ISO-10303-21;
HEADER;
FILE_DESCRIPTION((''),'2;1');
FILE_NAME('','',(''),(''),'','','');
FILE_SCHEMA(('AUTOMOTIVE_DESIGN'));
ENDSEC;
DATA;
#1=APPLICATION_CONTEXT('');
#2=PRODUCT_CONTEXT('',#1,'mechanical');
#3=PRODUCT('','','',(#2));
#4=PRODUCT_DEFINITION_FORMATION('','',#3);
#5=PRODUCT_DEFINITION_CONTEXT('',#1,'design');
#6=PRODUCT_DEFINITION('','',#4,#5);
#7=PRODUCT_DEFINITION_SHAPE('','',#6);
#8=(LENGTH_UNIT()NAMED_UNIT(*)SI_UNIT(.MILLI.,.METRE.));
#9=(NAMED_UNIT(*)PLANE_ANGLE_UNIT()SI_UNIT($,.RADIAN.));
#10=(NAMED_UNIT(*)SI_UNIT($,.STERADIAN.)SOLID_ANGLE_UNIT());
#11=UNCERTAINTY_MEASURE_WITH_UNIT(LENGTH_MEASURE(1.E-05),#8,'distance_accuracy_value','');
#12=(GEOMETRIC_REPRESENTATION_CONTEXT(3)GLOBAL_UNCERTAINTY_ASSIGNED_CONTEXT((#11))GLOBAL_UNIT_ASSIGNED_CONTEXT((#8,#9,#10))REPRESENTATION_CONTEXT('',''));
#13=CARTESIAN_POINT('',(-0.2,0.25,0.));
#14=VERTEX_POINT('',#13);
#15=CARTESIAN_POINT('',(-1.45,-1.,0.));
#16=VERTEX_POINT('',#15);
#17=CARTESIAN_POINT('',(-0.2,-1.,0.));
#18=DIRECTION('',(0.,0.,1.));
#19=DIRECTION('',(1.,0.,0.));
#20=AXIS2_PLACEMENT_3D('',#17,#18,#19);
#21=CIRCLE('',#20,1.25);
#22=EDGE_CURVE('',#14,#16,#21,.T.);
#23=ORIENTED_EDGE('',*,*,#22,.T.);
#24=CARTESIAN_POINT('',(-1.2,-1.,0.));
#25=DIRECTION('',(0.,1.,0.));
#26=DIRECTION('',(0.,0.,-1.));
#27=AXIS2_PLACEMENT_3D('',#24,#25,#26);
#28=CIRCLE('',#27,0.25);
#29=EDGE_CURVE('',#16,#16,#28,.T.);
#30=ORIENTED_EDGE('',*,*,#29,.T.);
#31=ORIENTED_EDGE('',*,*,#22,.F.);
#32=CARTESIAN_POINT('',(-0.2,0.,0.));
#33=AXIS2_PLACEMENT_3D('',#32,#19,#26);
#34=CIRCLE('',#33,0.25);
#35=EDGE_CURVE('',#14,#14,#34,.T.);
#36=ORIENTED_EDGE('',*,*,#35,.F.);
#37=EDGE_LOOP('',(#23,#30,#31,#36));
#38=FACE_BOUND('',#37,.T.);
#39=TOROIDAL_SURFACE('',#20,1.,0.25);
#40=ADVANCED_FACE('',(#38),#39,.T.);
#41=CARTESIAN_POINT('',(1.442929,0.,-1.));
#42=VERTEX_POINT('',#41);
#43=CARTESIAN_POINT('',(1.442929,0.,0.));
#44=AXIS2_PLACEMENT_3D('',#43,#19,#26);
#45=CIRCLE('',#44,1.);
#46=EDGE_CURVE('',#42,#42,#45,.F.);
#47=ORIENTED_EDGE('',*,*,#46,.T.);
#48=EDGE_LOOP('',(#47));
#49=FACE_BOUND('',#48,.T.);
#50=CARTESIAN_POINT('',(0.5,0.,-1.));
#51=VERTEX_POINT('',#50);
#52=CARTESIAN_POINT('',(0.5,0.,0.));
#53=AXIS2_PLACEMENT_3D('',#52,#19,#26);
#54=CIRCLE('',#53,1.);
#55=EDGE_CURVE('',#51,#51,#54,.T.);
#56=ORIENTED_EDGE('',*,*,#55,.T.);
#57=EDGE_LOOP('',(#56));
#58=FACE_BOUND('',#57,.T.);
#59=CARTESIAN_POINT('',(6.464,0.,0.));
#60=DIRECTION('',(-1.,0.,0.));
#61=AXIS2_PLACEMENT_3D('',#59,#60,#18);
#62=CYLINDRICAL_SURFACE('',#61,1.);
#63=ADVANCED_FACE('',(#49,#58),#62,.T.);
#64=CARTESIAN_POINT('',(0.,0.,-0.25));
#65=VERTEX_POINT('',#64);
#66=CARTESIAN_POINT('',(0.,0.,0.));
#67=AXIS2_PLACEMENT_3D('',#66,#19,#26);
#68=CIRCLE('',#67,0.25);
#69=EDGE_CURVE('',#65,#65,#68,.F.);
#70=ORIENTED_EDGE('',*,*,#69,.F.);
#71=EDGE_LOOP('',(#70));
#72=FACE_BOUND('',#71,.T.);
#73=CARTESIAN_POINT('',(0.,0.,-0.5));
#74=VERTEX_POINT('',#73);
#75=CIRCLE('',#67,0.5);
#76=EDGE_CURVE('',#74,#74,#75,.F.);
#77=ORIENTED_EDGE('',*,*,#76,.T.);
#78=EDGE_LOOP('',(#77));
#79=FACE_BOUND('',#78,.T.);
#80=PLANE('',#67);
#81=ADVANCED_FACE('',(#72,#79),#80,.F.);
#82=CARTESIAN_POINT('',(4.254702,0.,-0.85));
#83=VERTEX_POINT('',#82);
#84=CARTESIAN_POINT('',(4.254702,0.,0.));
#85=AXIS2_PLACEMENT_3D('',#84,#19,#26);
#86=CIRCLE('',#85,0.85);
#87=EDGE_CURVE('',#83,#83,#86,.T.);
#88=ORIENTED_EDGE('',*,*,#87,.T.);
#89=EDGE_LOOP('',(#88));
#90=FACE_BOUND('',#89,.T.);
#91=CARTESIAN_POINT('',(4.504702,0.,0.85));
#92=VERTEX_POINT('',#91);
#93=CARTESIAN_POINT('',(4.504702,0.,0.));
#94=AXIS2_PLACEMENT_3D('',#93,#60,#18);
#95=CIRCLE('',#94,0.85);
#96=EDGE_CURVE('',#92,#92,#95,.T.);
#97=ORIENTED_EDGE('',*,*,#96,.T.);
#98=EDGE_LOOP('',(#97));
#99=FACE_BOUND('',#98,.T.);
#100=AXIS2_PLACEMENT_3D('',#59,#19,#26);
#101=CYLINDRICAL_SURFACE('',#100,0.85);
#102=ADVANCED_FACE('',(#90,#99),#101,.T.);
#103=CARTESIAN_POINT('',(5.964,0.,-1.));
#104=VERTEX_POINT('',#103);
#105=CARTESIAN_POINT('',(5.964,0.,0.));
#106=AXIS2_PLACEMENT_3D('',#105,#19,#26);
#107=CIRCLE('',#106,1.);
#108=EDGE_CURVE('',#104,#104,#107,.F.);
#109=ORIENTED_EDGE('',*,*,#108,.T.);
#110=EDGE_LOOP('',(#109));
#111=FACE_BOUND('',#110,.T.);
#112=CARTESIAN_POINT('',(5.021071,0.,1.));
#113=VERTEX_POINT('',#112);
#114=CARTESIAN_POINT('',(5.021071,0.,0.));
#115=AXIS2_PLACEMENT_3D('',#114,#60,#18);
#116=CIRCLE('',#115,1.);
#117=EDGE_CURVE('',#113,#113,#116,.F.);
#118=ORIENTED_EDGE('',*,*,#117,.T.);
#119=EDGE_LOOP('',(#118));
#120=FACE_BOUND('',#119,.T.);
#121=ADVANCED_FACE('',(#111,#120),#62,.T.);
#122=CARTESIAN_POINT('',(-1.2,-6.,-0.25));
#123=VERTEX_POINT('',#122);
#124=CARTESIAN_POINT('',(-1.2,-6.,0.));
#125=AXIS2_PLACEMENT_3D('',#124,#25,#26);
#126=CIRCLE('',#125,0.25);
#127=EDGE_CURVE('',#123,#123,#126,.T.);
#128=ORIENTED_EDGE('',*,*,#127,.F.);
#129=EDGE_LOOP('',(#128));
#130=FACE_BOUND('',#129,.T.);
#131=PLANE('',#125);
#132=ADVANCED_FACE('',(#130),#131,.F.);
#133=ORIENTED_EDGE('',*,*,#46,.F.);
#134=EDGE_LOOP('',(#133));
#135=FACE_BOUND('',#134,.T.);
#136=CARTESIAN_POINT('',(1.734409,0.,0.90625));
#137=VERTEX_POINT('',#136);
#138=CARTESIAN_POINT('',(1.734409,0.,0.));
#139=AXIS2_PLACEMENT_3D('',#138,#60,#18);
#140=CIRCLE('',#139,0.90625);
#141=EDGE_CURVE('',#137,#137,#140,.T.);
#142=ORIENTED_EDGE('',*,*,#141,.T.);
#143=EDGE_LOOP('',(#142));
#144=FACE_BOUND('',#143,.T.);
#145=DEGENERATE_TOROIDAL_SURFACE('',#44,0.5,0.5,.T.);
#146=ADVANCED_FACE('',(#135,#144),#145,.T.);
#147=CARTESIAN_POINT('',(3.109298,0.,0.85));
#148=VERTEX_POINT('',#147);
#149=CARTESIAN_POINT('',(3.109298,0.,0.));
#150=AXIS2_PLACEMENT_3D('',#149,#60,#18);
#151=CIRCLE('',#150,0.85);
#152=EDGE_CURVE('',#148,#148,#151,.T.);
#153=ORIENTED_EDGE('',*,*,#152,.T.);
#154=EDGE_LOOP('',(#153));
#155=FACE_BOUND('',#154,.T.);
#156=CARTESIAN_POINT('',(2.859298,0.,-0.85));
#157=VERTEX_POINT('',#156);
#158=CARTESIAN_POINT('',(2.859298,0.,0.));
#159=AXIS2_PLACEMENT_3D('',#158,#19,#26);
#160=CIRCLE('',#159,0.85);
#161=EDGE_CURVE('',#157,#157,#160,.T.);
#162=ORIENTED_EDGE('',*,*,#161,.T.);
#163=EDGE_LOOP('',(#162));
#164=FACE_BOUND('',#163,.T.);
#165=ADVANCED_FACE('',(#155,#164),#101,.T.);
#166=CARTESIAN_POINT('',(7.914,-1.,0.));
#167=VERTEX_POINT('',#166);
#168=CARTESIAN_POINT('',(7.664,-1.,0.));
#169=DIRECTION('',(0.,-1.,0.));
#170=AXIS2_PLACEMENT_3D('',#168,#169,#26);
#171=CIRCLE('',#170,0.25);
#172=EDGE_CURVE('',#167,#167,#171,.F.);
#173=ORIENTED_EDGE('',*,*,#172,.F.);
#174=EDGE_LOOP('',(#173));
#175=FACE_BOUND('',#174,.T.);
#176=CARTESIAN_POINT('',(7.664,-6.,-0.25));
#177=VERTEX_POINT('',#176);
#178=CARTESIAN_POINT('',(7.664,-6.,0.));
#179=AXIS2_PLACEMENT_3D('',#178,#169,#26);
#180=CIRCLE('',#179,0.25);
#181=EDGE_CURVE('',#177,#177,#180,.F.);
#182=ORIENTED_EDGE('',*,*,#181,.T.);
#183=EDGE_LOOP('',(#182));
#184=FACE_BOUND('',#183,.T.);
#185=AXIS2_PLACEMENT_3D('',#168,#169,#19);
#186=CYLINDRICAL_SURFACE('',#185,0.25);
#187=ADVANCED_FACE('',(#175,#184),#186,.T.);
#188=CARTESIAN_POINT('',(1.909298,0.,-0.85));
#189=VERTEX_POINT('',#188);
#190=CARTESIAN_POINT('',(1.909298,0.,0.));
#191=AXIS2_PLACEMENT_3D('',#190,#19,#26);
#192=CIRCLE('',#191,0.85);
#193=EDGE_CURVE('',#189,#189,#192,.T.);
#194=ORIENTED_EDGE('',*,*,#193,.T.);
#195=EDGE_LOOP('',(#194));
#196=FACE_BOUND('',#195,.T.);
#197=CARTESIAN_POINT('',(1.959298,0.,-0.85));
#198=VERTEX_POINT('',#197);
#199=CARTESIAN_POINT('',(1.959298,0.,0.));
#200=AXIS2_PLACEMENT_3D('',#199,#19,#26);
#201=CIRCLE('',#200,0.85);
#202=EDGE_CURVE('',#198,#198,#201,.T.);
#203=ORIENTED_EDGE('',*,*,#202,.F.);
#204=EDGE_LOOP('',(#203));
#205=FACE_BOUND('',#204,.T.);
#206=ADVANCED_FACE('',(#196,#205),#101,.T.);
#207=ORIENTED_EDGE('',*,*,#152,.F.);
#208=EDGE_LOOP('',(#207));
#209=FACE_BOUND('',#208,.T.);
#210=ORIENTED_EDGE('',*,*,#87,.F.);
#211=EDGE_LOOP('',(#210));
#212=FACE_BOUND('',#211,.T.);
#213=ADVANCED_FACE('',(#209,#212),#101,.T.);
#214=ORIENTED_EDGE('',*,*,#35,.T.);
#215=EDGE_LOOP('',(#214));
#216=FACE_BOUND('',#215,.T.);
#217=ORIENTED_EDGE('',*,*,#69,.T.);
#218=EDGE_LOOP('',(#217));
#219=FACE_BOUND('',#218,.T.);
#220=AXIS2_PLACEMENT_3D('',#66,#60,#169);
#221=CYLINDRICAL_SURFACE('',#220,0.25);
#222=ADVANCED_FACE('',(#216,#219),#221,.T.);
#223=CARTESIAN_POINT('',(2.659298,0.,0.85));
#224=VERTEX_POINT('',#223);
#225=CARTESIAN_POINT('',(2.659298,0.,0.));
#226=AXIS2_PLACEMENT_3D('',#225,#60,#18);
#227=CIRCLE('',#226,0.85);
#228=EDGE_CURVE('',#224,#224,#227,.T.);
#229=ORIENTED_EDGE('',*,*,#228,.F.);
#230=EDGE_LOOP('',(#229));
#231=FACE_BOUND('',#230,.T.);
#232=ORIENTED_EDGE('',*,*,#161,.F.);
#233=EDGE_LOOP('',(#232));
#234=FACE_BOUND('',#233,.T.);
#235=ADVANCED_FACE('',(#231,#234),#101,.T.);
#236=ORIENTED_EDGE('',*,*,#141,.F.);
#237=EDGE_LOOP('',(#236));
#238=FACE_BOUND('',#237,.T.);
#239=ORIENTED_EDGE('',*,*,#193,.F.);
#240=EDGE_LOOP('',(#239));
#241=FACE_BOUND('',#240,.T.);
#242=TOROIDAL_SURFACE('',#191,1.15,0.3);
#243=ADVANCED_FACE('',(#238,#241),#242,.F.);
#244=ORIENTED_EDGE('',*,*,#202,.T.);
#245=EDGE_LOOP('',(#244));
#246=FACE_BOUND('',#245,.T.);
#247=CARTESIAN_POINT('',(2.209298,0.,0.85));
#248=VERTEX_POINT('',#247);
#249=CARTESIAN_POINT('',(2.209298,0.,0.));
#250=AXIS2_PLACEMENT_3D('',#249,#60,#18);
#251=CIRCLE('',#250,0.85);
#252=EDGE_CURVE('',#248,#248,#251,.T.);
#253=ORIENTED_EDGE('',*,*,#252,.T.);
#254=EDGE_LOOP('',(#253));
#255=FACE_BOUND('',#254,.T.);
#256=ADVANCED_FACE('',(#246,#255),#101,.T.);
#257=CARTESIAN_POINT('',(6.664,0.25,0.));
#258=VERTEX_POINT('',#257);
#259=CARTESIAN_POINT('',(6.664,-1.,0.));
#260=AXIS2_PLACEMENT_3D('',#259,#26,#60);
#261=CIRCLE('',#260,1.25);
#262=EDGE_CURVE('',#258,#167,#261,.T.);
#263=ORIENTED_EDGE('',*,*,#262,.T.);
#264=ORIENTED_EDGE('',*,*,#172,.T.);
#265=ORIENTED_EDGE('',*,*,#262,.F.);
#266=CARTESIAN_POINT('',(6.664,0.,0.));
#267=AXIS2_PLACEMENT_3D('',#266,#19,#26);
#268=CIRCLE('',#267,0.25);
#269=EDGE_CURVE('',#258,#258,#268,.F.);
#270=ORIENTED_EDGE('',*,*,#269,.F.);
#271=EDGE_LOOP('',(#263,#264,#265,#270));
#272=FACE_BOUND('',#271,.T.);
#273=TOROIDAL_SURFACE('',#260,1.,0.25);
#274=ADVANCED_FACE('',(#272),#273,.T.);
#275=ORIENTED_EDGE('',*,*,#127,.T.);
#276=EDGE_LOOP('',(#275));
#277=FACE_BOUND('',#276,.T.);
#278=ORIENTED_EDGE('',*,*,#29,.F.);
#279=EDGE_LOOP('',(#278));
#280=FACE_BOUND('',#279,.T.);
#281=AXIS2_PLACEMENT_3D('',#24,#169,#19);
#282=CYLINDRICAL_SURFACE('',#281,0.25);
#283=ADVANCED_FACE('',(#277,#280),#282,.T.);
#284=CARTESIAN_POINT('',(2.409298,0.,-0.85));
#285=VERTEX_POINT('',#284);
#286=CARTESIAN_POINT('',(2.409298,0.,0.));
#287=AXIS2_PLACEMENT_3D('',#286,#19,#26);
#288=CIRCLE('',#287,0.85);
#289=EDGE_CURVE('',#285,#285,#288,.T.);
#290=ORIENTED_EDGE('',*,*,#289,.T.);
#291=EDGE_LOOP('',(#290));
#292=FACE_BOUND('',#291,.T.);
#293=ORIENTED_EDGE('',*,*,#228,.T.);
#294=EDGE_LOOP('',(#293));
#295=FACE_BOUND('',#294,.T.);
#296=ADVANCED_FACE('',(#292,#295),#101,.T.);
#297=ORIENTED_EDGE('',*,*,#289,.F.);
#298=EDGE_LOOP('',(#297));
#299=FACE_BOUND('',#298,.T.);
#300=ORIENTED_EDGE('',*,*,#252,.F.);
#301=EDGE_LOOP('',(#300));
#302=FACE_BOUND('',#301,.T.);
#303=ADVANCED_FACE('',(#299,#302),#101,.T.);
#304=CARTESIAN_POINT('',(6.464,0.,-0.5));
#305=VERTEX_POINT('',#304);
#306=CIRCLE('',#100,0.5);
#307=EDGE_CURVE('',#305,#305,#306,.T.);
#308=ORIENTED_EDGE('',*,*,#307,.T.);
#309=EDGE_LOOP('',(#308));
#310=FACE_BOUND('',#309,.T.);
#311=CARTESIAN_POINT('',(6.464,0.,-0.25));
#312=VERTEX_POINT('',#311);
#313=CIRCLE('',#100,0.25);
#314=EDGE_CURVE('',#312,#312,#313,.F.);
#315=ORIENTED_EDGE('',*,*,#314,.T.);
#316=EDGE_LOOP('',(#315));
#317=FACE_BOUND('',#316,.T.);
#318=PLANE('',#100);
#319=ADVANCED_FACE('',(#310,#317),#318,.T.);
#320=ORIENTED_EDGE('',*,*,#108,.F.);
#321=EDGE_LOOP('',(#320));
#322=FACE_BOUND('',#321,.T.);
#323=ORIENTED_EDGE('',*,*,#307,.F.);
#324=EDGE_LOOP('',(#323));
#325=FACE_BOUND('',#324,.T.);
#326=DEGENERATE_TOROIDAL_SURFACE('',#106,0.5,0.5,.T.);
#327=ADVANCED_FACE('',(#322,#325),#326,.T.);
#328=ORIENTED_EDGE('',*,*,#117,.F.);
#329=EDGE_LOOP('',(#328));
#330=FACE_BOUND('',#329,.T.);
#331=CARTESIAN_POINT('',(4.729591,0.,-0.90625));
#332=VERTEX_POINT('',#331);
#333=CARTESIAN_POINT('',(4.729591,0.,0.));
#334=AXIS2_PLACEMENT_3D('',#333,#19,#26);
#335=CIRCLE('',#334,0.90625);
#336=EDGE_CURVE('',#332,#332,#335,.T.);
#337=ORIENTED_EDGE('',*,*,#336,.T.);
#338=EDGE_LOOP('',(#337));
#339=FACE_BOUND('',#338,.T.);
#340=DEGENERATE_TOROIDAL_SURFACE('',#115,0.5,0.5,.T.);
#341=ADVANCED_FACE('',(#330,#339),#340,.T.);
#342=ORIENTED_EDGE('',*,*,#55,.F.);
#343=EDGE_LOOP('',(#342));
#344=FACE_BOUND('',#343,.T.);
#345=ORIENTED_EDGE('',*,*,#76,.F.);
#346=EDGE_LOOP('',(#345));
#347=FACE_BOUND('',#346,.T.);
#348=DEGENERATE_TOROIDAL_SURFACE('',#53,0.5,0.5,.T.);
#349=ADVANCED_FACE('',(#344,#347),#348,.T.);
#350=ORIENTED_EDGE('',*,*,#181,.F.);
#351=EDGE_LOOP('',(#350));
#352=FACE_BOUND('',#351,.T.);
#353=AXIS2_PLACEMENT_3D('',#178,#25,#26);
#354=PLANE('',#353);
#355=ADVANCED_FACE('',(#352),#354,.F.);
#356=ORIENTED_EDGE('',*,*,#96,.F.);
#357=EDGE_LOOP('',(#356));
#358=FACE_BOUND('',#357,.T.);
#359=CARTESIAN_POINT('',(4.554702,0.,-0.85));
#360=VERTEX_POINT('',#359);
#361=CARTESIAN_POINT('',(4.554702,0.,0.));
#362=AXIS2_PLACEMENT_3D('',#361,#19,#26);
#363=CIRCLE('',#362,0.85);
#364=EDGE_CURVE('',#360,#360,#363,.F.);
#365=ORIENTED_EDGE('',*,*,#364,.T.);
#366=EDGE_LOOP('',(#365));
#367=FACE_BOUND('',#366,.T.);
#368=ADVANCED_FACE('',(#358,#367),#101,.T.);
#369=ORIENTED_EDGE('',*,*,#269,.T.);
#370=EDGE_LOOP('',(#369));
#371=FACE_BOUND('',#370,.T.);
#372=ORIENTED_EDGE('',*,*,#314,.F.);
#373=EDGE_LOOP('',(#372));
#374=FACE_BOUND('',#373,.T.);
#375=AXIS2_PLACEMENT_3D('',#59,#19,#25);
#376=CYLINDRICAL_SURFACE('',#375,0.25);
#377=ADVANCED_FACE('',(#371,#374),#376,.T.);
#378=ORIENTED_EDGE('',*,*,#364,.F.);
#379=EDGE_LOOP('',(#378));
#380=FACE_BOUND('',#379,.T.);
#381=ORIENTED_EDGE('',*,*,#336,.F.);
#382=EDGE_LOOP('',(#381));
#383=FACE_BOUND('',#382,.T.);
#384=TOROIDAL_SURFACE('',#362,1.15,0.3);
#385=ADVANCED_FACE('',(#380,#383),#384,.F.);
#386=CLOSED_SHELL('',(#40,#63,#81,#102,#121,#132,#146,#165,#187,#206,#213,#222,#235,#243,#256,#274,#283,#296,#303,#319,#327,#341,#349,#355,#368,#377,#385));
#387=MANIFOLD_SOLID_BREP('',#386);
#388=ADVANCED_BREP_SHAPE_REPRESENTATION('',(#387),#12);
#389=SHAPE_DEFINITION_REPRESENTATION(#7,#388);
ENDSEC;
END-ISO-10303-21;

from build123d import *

# Parameters (mm, degrees)
SKETCH58_R          = 1
BOSS_EXTRUDE1_DEPTH = 6.464
SKETCH59_W          = 2.864
SKETCH59_H          = 0.3
FILLET6_R           = 0.5
FILLET7_R           = 0.3
SKETCH54_R          = 0.25


with BuildPart() as part:
    # Sketch58 → Boss-Extrude1 (new body)
    with BuildSketch(Plane(origin=(0, 0, 0), x_dir=(0, 0, -1), z_dir=(1, 0, 0))):
        Circle(SKETCH58_R)
    extrude(amount=BOSS_EXTRUDE1_DEPTH)

    # Sketch59 → Cut-Revolve1 (revolve, cut)
    with BuildSketch(Plane.XY, mode=Mode.PRIVATE) as cut_revolve1_sk:
        with Locations((3.232, 1)):
            Rectangle(SKETCH59_W, SKETCH59_H)
    revolve(cut_revolve1_sk.sketch.rotate(Axis((6.464, 0, 0), (-1, 0, 0)), 90), axis=Axis((6.464, 0, 0), (-1, 0, 0)), mode=Mode.SUBTRACT)

    # Fillet6
    # the kernel refuses this fillet: 0.5 mm, written as the material it takes off along each edge
    with BuildSketch(Plane(origin=(0, 0, 0), x_dir=(0, 0, -1), z_dir=(0, -1, 0))) as fillet6_piece_1:
        with BuildLine():
            CenterArc((1 - FILLET6_R, FILLET6_R), FILLET6_R, 270, 90)
            Line((1 - FILLET6_R, 0), (1 - FILLET6_R, -FILLET6_R * 0.02))
            Line((1 - FILLET6_R, -FILLET6_R * 0.02), (1 + FILLET6_R * 0.02, -FILLET6_R * 0.02))
            Line((1 + FILLET6_R * 0.02, -FILLET6_R * 0.02), (1 + FILLET6_R * 0.02, FILLET6_R))
            Line((1 + FILLET6_R * 0.02, FILLET6_R), (1, FILLET6_R))
        make_face()
    revolve(axis=Axis((0, 0, 0), (1, 0, 0)), mode=Mode.SUBTRACT)
    with BuildSketch(Plane(origin=(6.464, 0, 0), x_dir=(0, 0, -1), z_dir=(0, -1, 0))) as fillet6_piece_2:
        with BuildLine():
            CenterArc((1 - FILLET6_R, -FILLET6_R), FILLET6_R, 0, 90)
            Line((1 - FILLET6_R, 0), (1 - FILLET6_R, FILLET6_R * 0.02))
            Line((1 - FILLET6_R, FILLET6_R * 0.02), (1 + FILLET6_R * 0.02, FILLET6_R * 0.02))
            Line((1 + FILLET6_R * 0.02, FILLET6_R * 0.02), (1 + FILLET6_R * 0.02, -FILLET6_R))
            Line((1 + FILLET6_R * 0.02, -FILLET6_R), (1, -FILLET6_R))
        make_face()
    revolve(axis=Axis((6.464, 0, 0), (1, 0, 0)), mode=Mode.SUBTRACT)
    with BuildSketch(Plane(origin=(1.8, 0, 0), x_dir=(0, 0, -1), z_dir=(0, 1, 0))) as fillet6_piece_3:
        with BuildLine():
            CenterArc((0.5, 0.357071421), FILLET6_R, 314.427004001, 45.572995999)
            Line((0.85, 0), (0.857, -0.007141428))
            ThreePointArc((0.857, -0.007141428), (0.925, -0.01), (1, -0.01))
            Line((1, -0.01), (1.01, 0))
            Line((1.01, 0), (1.01, 0.357071421))
            Line((1.01, 0.357071421), (1, 0.357071421))
        make_face()
    revolve(axis=Axis((1.8, 0, 0), (-1, 0, 0)), mode=Mode.SUBTRACT)
    with BuildSketch(Plane(origin=(4.664, 0, 0), x_dir=(0, 0, -1), z_dir=(0, 1, 0))) as fillet6_piece_4:
        with BuildLine():
            CenterArc((0.5, -0.357071421), FILLET6_R, 0, 45.572995999)
            Line((1, -0.357071421), (1.01, -0.357071421))
            Line((1.01, -0.357071421), (1.01, 0))
            Line((1.01, 0), (1, 0.01))
            ThreePointArc((1, 0.01), (0.925, 0.01), (0.857, 0.007141428))
            Line((0.857, 0.007141428), (0.85, 0))
        make_face()
    revolve(axis=Axis((4.664, 0, 0), (-1, 0, 0)), mode=Mode.SUBTRACT)

    # Fillet7
    fillet7_edges = [part.edges().sort_by_distance(p)[0] for p in [
        (1.8, 0, 0.85),
        (4.664, 0, 0.85),
    ]]
    fillet(fillet7_edges, radius=FILLET7_R)

    # Sweep1: sweep along a path in Sketch55
    with BuildLine(Plane.XY) as sweep1_path:
        Line((0, 0), (-0.2, 0))
        ThreePointArc((-0.2, 0), (-0.907106781, -0.292893219), (-1.2, -1))
        Line((-1.2, -1), (-1.2, -6))
    # Sketch54 → Sweep1 (sweep)
    with BuildSketch(Plane(origin=(0, 0, 0), x_dir=(0, 0, -1), z_dir=(1, 0, 0))):
        Circle(SKETCH54_R)
    sweep1 = sweep(path=sweep1_path.line)

    # Mirror1: Sweep1 across plane
    add(sweep1.mirror(Plane(origin=(3.232, 0, 0), x_dir=(0, 0, 1), z_dir=(1, 0, 0))))


solid = part.part
